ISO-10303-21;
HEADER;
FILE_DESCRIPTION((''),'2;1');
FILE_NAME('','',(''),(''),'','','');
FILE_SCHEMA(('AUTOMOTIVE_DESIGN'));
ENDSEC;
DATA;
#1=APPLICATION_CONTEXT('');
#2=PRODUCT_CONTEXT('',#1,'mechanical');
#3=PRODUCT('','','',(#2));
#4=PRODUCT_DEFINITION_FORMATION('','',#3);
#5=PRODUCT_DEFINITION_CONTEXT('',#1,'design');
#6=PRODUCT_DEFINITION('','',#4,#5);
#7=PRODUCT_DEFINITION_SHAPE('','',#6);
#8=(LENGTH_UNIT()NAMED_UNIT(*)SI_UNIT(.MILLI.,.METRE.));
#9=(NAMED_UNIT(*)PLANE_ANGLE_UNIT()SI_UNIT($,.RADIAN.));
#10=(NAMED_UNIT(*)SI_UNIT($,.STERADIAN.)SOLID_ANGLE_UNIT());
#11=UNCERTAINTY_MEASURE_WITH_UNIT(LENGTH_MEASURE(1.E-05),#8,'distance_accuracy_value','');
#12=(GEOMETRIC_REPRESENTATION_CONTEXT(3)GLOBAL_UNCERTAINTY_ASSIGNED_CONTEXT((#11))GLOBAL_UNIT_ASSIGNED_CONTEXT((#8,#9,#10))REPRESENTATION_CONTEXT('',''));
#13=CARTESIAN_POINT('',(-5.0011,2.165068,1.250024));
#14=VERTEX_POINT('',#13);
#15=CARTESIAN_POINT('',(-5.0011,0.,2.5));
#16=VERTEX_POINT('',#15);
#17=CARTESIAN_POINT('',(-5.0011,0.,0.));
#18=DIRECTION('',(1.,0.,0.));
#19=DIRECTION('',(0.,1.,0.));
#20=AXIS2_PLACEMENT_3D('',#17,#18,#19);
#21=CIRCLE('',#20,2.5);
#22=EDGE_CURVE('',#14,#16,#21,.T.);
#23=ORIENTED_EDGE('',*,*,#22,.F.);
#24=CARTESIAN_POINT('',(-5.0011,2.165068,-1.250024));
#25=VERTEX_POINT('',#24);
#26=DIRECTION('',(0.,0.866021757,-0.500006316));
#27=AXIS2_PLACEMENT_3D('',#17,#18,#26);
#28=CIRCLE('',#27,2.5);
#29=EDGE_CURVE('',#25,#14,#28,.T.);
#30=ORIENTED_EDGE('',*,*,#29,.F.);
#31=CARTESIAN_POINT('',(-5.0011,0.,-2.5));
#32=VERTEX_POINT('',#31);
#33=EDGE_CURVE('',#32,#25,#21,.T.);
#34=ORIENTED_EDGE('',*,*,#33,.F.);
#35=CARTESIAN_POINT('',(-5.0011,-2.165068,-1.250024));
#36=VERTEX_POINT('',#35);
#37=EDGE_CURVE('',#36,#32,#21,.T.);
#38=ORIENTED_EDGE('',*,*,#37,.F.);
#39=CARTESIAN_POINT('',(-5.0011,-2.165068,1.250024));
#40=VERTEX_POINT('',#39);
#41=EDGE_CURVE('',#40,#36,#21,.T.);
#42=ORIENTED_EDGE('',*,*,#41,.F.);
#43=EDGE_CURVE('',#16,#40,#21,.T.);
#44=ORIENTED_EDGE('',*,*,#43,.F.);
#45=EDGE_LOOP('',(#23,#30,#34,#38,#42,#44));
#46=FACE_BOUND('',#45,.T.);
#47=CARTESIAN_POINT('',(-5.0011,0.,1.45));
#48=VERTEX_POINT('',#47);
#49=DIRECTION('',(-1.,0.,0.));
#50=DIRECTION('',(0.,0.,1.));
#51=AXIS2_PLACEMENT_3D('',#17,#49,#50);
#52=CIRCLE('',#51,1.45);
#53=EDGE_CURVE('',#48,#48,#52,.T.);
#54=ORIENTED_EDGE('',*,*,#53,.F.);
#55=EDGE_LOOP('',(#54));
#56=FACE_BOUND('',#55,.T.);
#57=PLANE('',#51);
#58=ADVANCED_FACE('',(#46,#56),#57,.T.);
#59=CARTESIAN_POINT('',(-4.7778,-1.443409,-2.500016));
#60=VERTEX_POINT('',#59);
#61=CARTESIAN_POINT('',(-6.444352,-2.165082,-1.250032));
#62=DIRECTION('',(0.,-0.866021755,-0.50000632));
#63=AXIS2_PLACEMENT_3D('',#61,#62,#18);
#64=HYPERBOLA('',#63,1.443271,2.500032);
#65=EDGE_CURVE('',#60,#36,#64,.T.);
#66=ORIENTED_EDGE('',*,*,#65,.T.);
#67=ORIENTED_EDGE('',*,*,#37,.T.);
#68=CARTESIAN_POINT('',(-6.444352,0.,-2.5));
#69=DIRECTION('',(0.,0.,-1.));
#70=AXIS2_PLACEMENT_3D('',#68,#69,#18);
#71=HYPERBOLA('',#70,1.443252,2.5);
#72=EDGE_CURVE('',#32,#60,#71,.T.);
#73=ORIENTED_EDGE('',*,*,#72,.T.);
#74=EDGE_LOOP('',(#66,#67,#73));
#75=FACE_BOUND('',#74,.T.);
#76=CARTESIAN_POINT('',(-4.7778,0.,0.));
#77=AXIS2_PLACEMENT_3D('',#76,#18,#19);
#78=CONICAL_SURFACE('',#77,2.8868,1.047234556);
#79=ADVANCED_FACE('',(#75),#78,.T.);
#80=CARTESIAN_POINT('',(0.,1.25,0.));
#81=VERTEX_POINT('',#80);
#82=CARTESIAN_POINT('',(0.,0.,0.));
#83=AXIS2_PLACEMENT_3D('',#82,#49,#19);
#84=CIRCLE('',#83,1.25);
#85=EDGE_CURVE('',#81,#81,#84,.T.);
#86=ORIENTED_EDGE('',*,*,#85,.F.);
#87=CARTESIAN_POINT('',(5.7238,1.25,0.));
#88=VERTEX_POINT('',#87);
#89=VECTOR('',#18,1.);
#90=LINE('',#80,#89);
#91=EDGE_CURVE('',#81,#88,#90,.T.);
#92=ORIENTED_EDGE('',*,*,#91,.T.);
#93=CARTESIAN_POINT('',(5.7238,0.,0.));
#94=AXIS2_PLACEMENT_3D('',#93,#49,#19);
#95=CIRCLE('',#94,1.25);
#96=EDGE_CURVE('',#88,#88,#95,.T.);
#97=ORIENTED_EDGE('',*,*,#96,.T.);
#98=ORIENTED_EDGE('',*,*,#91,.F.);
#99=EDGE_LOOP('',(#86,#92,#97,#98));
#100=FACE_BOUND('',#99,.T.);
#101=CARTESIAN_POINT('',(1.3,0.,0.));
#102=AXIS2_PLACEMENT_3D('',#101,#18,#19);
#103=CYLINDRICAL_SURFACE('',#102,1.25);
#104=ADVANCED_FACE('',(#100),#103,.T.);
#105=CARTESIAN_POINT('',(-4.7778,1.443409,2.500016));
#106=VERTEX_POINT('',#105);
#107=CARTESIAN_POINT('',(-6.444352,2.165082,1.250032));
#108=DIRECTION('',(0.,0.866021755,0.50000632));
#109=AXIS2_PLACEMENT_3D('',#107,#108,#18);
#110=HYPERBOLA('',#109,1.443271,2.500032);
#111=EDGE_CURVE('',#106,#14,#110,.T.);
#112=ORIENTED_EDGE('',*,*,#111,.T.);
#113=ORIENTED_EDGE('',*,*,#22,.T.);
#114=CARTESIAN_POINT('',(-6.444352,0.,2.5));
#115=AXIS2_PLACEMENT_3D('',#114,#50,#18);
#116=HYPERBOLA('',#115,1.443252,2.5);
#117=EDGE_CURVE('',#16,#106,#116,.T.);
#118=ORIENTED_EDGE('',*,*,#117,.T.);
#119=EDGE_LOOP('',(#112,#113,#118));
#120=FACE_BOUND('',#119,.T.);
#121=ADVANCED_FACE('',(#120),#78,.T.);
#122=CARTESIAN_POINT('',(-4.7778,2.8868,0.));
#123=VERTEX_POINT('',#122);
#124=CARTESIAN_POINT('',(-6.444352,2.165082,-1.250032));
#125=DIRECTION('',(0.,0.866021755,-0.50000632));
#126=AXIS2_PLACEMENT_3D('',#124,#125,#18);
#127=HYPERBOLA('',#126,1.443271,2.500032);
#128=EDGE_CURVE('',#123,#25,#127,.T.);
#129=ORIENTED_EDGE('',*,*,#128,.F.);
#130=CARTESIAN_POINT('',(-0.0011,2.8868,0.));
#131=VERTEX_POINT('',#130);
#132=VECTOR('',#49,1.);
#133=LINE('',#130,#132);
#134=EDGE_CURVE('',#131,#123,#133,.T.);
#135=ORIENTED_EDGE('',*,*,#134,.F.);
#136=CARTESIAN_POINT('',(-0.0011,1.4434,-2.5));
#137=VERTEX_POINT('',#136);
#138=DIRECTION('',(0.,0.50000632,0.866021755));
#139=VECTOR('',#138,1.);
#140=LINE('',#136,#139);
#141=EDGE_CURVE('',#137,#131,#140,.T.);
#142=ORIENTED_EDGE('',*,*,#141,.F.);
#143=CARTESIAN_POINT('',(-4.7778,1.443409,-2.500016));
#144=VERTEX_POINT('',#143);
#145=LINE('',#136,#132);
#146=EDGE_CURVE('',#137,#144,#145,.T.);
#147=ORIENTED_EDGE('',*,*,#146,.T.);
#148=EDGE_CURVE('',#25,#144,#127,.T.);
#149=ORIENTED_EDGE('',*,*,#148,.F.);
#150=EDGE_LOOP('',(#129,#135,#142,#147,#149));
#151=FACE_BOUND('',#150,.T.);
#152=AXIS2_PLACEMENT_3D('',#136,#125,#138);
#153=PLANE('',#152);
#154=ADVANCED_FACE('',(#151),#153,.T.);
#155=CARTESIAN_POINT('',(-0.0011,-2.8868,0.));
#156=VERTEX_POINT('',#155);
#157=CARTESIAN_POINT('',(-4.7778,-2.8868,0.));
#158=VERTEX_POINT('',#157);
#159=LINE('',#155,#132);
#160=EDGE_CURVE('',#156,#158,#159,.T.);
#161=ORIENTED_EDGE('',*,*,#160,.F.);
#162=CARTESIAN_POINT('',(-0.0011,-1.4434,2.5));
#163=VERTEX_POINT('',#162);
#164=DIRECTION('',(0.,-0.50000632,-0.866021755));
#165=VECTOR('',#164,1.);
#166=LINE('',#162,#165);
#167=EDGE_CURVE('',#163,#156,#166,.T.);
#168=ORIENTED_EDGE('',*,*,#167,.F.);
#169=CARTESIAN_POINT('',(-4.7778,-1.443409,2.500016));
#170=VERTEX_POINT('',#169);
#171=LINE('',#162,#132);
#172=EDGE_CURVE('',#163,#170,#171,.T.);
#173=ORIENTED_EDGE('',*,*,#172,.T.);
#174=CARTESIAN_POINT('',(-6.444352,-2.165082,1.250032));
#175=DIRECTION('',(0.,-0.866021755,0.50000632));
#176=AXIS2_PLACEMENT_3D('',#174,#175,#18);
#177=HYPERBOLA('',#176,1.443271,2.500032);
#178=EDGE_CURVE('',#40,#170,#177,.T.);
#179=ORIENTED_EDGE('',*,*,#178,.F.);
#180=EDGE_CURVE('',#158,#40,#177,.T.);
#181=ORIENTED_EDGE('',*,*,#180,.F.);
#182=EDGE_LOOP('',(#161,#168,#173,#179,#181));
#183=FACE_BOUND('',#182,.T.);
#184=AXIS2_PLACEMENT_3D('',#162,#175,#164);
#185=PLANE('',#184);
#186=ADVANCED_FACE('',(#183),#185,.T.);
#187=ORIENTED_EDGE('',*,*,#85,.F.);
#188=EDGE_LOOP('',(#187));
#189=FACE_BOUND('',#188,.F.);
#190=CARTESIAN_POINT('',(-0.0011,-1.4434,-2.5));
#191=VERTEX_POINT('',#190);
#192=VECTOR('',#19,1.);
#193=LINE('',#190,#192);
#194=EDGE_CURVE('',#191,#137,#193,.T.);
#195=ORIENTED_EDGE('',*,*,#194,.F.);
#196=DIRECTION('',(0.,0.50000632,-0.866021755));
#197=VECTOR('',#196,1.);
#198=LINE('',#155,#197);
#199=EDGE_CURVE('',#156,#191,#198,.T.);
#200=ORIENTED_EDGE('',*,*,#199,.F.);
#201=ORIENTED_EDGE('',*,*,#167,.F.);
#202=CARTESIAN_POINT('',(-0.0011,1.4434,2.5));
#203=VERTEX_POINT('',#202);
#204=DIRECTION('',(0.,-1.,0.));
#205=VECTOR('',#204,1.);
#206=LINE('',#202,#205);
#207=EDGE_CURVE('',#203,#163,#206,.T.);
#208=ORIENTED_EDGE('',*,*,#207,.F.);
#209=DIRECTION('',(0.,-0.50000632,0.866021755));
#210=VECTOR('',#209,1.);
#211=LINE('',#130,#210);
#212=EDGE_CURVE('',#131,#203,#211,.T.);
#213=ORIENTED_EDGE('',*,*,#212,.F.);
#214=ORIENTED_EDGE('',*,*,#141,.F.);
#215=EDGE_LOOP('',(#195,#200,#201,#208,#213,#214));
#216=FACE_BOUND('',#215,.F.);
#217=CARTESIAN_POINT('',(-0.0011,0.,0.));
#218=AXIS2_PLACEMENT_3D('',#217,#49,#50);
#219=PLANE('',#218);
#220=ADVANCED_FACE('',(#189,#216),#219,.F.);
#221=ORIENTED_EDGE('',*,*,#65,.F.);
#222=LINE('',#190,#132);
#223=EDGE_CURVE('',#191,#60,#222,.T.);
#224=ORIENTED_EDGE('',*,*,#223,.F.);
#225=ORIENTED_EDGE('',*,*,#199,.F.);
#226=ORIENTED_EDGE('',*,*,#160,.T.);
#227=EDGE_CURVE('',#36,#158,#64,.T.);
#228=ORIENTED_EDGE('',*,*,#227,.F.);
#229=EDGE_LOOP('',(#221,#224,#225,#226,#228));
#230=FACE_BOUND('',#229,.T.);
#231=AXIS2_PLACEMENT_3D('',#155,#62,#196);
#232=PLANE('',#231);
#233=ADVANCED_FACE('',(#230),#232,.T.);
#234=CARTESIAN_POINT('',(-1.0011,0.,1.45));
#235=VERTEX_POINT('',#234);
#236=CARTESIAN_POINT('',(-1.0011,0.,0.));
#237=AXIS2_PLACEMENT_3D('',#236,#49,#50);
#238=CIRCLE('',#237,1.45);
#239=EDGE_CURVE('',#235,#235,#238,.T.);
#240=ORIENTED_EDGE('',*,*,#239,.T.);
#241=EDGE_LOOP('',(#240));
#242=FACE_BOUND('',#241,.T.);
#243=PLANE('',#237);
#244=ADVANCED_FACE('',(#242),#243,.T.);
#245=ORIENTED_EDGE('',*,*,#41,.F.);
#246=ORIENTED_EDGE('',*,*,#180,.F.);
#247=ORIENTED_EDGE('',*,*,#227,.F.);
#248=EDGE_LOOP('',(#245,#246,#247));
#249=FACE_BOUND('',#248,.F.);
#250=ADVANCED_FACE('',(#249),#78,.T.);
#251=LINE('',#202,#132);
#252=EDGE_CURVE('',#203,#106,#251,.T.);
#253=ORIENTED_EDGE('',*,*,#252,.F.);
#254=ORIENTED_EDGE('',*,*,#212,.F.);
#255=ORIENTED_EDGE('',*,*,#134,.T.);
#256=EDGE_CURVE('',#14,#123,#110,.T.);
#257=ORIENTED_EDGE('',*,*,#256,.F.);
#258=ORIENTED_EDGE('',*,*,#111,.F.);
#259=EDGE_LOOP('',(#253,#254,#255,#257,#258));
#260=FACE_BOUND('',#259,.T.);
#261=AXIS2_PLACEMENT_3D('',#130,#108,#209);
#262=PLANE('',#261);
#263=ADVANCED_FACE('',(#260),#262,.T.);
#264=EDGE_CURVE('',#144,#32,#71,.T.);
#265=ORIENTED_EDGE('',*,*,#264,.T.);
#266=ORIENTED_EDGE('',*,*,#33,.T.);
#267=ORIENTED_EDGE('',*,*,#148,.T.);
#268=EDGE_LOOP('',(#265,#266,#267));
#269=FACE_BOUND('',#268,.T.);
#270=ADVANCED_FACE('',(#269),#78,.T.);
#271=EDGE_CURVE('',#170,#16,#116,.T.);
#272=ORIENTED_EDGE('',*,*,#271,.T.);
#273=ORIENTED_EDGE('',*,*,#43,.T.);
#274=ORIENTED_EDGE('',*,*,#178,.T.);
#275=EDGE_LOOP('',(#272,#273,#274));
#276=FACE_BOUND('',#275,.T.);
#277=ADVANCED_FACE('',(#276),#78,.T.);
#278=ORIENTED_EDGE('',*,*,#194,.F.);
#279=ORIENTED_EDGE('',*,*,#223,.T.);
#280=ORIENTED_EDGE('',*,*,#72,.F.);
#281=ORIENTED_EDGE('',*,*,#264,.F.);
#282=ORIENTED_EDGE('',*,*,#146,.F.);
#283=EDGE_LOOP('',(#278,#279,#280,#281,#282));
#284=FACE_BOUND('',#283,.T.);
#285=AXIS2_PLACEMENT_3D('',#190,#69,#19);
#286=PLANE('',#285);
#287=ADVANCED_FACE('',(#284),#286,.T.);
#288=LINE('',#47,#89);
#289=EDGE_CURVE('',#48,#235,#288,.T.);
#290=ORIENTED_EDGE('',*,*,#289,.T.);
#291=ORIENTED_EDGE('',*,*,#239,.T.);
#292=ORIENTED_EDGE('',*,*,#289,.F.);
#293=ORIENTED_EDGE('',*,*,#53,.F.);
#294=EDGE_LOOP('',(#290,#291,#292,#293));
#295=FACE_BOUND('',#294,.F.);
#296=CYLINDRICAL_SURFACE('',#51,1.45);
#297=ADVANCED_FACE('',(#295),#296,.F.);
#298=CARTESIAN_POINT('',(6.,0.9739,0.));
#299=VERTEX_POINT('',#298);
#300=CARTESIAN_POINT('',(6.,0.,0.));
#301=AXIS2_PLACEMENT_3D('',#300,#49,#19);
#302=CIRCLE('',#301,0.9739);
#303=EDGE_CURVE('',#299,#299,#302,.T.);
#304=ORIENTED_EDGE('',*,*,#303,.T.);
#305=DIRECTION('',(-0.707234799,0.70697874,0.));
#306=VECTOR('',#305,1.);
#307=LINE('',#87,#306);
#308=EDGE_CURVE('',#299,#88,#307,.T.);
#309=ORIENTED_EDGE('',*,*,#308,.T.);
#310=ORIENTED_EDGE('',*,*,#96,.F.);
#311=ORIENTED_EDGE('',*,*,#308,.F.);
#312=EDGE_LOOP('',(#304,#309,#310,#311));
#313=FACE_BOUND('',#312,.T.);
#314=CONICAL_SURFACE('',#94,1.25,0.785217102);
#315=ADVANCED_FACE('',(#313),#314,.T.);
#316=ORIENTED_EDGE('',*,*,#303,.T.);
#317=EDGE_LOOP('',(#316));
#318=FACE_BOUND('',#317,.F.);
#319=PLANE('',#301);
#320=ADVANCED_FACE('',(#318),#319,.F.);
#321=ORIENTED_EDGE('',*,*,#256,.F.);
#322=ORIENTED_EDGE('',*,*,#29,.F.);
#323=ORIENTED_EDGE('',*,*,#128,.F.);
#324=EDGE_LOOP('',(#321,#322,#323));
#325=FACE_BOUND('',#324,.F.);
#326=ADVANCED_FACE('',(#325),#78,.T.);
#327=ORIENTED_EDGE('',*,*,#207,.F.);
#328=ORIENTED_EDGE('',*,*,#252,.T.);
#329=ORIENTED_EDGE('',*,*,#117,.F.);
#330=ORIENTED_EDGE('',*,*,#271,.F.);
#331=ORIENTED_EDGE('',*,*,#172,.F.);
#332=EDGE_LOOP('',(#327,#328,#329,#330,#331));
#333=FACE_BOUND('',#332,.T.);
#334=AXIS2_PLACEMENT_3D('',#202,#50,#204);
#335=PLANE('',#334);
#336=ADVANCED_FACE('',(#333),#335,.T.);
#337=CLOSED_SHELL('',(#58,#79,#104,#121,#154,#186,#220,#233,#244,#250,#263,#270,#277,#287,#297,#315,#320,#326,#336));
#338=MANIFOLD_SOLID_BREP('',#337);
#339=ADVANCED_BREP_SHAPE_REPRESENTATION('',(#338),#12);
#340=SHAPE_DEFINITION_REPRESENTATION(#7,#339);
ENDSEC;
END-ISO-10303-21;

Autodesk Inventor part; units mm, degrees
ref_plane "YZ Plane" through (0, 0, 0) normal (1, 0, 0) x (0, 1, 0)
ref_plane "XZ Plane" through (0, 0, 0) normal (0, 1, 0) x (-1, 0, 0)
sketch "Sketch1" plane through (0, 0, 0) normal (0, 0, 1) x (1, 0, 0)
  line L0 (0, 2.5) -> (0, 1.25)
  line L1 (1.3, 1.25) -> (6, 1.25)
  line L2 (6, 1.25) -> (6, 0)
  line L3 (6, 0) -> (-0.0011, 0)
  line L4 (-1.2013, 0) -> (7.2002, 0) projected
  line L5 (-0.0011, 0) -> (-0.0011, 2.5)
  line L6 (-0.0011, 2.5) -> (0, 2.5)
  line L7 (1.3, 1.25) -> (1.0238, 1.25)
  line L8 (1.0238, 1.25) -> (0, 1.25)
  line L9 (0, -0.5) -> (0, 3) projected
  dimension "d0" = 6
  dimension "d1" = 4.7
  dimension "d2" = 2.5
  dimension "d9" = 0.0011
  dimension "d10" = 5
  dimension "d13" = 0.2762
  dimension "d14" = 2.5
revolve "Body" add sketch "Sketch1" angle 360 about axis through (6, 0, 0) along (-1, 0, 0)
sketch "Sketch2" plane through (-0.0011, 0, 0) normal (-1, 0, 0) x (0, 0, 1)
  line L0 (0, 2.8868) -> (2.5, 1.4434)
  line L1 (2.5, 1.4434) -> (2.5, -1.4434)
  line L2 (2.5, -1.4434) -> (0, -2.8868)
  line L3 (0, -2.8868) -> (-2.5, -1.4434)
  line L4 (-2.5, -1.4434) -> (-2.5, 1.4434)
  line L5 (-2.5, 1.4434) -> (0, 2.8868)
  point P0 (0, 0)
  point P1 (0, 0)
  dimension "d11" = 5
extrude "Head" add sketch "Sketch2" along normal blind 5
sketch "Sketch4" plane through (0, 0, 0) normal (0, 0, 1) x (1, 0, 0)
  line L0 (-5.0011, 2.5) -> (-5.0011, 2.8868)
  line L1 (-5.0011, 2.8868) -> (-4.7778, 2.8868)
  line L2 (-4.7778, 2.8868) -> (-5.0011, 2.5)
  line L3 (-2.0399, 0) -> (0.3387, 0) projected
  line L4 (-0.0011, 2.8868) -> (-5.0011, 2.8868) projected
  line L5 (-5.0011, 1.4434) -> (-5.0011, 2.8868) projected
  line L6 (-0.0011, -2.8868) -> (-5.0011, -2.8868) projected
  line L7 (-0.0011, 2.1651) -> (-0.0011, 2.8868) projected
  line L8 (-0.0011, 2.8868) -> (-0.2244, 2.8868)
  dimension "d5" = 30
  dimension "d19" = 5
revolve "Chamfer1" cut sketch "Sketch4" angle 360 about axis through (-10, 0, 0) along (1, 0, 0)
thread "Thread" size "M2.5x0.45" class "6g" standard "ISO Metric profile" length 4.7
chamfer "Chamfer2" distance 0.2761 distance2 0.2762 1 edges at (6, -1.25, 0) measured on face at (6, -0.3871, 0.3429)
ref_plane "Work Plane1" through (1.525, 0, 0) normal (0, 0, 1) x (1, 0, 0)
sketch "Sketch7" plane through (-5.0011, 0, 0) normal (-1, 0, 0) x (0, 0, 1)
  circle A0 centre (0, 0) radius 1.45
  point P0 (0, 0)
  dimension "d59" = 2.9
extrude "Extrusion5" cut sketch "Sketch7" against normal blind 4
equation "\"d11\" = SW"
equation "\"d15\" = GEL"
equation "\"d6\" = -0.5 * SPD + 0.5 * GD"
equation "\"d0\" = NLG"
equation "\"d1\" = GEL"
equation "\"d2\" = GD"
equation "\"d10\" = SD2"
equation "\"d14\" = BDM"
equation "\"d5\" = ANG1"
equation "\"d19\" = SW0"
equation "\"NLG\" = 6"
equation "\"GD\" = NND"
equation "\"BDM\" = NND"
equation "\"KOH\" = 1.7"
equation "\"GEL\" = 4.7"
equation "\"SW\" = 5"
equation "\"SW0\" = SW"
equation "\"SPD\" = NND - 1.2269 * PTC"
equation "\"SD2\" = SW"
equation "\"SD\" = 0.001"
equation "\"ANG1\" = 30deg"
equation "\"GAL\" = 0.61345 * PTC"
equation "\"GUL\" = 0.61345 * PTC"
equation "\"RR\" = 0.001"
equation "\"WFT\" = SD"
equation "\"GD1\" = THREADDIA - 1.2269 * PTC"
equation "\"THREADDIA\" = 2.5"
equation "\"SDH\" = SW"
equation "\"TOA\" = 30deg"
equation "\"FAWI\" = 45deg"
equation "\"PTC\" = 0.45"
equation "\"NND\" = 2.5"
equation "\"E0\" = 1.155 * SW"
properties part number "AS 1110 - M2.5 x 6" material "Steel, Mild"
